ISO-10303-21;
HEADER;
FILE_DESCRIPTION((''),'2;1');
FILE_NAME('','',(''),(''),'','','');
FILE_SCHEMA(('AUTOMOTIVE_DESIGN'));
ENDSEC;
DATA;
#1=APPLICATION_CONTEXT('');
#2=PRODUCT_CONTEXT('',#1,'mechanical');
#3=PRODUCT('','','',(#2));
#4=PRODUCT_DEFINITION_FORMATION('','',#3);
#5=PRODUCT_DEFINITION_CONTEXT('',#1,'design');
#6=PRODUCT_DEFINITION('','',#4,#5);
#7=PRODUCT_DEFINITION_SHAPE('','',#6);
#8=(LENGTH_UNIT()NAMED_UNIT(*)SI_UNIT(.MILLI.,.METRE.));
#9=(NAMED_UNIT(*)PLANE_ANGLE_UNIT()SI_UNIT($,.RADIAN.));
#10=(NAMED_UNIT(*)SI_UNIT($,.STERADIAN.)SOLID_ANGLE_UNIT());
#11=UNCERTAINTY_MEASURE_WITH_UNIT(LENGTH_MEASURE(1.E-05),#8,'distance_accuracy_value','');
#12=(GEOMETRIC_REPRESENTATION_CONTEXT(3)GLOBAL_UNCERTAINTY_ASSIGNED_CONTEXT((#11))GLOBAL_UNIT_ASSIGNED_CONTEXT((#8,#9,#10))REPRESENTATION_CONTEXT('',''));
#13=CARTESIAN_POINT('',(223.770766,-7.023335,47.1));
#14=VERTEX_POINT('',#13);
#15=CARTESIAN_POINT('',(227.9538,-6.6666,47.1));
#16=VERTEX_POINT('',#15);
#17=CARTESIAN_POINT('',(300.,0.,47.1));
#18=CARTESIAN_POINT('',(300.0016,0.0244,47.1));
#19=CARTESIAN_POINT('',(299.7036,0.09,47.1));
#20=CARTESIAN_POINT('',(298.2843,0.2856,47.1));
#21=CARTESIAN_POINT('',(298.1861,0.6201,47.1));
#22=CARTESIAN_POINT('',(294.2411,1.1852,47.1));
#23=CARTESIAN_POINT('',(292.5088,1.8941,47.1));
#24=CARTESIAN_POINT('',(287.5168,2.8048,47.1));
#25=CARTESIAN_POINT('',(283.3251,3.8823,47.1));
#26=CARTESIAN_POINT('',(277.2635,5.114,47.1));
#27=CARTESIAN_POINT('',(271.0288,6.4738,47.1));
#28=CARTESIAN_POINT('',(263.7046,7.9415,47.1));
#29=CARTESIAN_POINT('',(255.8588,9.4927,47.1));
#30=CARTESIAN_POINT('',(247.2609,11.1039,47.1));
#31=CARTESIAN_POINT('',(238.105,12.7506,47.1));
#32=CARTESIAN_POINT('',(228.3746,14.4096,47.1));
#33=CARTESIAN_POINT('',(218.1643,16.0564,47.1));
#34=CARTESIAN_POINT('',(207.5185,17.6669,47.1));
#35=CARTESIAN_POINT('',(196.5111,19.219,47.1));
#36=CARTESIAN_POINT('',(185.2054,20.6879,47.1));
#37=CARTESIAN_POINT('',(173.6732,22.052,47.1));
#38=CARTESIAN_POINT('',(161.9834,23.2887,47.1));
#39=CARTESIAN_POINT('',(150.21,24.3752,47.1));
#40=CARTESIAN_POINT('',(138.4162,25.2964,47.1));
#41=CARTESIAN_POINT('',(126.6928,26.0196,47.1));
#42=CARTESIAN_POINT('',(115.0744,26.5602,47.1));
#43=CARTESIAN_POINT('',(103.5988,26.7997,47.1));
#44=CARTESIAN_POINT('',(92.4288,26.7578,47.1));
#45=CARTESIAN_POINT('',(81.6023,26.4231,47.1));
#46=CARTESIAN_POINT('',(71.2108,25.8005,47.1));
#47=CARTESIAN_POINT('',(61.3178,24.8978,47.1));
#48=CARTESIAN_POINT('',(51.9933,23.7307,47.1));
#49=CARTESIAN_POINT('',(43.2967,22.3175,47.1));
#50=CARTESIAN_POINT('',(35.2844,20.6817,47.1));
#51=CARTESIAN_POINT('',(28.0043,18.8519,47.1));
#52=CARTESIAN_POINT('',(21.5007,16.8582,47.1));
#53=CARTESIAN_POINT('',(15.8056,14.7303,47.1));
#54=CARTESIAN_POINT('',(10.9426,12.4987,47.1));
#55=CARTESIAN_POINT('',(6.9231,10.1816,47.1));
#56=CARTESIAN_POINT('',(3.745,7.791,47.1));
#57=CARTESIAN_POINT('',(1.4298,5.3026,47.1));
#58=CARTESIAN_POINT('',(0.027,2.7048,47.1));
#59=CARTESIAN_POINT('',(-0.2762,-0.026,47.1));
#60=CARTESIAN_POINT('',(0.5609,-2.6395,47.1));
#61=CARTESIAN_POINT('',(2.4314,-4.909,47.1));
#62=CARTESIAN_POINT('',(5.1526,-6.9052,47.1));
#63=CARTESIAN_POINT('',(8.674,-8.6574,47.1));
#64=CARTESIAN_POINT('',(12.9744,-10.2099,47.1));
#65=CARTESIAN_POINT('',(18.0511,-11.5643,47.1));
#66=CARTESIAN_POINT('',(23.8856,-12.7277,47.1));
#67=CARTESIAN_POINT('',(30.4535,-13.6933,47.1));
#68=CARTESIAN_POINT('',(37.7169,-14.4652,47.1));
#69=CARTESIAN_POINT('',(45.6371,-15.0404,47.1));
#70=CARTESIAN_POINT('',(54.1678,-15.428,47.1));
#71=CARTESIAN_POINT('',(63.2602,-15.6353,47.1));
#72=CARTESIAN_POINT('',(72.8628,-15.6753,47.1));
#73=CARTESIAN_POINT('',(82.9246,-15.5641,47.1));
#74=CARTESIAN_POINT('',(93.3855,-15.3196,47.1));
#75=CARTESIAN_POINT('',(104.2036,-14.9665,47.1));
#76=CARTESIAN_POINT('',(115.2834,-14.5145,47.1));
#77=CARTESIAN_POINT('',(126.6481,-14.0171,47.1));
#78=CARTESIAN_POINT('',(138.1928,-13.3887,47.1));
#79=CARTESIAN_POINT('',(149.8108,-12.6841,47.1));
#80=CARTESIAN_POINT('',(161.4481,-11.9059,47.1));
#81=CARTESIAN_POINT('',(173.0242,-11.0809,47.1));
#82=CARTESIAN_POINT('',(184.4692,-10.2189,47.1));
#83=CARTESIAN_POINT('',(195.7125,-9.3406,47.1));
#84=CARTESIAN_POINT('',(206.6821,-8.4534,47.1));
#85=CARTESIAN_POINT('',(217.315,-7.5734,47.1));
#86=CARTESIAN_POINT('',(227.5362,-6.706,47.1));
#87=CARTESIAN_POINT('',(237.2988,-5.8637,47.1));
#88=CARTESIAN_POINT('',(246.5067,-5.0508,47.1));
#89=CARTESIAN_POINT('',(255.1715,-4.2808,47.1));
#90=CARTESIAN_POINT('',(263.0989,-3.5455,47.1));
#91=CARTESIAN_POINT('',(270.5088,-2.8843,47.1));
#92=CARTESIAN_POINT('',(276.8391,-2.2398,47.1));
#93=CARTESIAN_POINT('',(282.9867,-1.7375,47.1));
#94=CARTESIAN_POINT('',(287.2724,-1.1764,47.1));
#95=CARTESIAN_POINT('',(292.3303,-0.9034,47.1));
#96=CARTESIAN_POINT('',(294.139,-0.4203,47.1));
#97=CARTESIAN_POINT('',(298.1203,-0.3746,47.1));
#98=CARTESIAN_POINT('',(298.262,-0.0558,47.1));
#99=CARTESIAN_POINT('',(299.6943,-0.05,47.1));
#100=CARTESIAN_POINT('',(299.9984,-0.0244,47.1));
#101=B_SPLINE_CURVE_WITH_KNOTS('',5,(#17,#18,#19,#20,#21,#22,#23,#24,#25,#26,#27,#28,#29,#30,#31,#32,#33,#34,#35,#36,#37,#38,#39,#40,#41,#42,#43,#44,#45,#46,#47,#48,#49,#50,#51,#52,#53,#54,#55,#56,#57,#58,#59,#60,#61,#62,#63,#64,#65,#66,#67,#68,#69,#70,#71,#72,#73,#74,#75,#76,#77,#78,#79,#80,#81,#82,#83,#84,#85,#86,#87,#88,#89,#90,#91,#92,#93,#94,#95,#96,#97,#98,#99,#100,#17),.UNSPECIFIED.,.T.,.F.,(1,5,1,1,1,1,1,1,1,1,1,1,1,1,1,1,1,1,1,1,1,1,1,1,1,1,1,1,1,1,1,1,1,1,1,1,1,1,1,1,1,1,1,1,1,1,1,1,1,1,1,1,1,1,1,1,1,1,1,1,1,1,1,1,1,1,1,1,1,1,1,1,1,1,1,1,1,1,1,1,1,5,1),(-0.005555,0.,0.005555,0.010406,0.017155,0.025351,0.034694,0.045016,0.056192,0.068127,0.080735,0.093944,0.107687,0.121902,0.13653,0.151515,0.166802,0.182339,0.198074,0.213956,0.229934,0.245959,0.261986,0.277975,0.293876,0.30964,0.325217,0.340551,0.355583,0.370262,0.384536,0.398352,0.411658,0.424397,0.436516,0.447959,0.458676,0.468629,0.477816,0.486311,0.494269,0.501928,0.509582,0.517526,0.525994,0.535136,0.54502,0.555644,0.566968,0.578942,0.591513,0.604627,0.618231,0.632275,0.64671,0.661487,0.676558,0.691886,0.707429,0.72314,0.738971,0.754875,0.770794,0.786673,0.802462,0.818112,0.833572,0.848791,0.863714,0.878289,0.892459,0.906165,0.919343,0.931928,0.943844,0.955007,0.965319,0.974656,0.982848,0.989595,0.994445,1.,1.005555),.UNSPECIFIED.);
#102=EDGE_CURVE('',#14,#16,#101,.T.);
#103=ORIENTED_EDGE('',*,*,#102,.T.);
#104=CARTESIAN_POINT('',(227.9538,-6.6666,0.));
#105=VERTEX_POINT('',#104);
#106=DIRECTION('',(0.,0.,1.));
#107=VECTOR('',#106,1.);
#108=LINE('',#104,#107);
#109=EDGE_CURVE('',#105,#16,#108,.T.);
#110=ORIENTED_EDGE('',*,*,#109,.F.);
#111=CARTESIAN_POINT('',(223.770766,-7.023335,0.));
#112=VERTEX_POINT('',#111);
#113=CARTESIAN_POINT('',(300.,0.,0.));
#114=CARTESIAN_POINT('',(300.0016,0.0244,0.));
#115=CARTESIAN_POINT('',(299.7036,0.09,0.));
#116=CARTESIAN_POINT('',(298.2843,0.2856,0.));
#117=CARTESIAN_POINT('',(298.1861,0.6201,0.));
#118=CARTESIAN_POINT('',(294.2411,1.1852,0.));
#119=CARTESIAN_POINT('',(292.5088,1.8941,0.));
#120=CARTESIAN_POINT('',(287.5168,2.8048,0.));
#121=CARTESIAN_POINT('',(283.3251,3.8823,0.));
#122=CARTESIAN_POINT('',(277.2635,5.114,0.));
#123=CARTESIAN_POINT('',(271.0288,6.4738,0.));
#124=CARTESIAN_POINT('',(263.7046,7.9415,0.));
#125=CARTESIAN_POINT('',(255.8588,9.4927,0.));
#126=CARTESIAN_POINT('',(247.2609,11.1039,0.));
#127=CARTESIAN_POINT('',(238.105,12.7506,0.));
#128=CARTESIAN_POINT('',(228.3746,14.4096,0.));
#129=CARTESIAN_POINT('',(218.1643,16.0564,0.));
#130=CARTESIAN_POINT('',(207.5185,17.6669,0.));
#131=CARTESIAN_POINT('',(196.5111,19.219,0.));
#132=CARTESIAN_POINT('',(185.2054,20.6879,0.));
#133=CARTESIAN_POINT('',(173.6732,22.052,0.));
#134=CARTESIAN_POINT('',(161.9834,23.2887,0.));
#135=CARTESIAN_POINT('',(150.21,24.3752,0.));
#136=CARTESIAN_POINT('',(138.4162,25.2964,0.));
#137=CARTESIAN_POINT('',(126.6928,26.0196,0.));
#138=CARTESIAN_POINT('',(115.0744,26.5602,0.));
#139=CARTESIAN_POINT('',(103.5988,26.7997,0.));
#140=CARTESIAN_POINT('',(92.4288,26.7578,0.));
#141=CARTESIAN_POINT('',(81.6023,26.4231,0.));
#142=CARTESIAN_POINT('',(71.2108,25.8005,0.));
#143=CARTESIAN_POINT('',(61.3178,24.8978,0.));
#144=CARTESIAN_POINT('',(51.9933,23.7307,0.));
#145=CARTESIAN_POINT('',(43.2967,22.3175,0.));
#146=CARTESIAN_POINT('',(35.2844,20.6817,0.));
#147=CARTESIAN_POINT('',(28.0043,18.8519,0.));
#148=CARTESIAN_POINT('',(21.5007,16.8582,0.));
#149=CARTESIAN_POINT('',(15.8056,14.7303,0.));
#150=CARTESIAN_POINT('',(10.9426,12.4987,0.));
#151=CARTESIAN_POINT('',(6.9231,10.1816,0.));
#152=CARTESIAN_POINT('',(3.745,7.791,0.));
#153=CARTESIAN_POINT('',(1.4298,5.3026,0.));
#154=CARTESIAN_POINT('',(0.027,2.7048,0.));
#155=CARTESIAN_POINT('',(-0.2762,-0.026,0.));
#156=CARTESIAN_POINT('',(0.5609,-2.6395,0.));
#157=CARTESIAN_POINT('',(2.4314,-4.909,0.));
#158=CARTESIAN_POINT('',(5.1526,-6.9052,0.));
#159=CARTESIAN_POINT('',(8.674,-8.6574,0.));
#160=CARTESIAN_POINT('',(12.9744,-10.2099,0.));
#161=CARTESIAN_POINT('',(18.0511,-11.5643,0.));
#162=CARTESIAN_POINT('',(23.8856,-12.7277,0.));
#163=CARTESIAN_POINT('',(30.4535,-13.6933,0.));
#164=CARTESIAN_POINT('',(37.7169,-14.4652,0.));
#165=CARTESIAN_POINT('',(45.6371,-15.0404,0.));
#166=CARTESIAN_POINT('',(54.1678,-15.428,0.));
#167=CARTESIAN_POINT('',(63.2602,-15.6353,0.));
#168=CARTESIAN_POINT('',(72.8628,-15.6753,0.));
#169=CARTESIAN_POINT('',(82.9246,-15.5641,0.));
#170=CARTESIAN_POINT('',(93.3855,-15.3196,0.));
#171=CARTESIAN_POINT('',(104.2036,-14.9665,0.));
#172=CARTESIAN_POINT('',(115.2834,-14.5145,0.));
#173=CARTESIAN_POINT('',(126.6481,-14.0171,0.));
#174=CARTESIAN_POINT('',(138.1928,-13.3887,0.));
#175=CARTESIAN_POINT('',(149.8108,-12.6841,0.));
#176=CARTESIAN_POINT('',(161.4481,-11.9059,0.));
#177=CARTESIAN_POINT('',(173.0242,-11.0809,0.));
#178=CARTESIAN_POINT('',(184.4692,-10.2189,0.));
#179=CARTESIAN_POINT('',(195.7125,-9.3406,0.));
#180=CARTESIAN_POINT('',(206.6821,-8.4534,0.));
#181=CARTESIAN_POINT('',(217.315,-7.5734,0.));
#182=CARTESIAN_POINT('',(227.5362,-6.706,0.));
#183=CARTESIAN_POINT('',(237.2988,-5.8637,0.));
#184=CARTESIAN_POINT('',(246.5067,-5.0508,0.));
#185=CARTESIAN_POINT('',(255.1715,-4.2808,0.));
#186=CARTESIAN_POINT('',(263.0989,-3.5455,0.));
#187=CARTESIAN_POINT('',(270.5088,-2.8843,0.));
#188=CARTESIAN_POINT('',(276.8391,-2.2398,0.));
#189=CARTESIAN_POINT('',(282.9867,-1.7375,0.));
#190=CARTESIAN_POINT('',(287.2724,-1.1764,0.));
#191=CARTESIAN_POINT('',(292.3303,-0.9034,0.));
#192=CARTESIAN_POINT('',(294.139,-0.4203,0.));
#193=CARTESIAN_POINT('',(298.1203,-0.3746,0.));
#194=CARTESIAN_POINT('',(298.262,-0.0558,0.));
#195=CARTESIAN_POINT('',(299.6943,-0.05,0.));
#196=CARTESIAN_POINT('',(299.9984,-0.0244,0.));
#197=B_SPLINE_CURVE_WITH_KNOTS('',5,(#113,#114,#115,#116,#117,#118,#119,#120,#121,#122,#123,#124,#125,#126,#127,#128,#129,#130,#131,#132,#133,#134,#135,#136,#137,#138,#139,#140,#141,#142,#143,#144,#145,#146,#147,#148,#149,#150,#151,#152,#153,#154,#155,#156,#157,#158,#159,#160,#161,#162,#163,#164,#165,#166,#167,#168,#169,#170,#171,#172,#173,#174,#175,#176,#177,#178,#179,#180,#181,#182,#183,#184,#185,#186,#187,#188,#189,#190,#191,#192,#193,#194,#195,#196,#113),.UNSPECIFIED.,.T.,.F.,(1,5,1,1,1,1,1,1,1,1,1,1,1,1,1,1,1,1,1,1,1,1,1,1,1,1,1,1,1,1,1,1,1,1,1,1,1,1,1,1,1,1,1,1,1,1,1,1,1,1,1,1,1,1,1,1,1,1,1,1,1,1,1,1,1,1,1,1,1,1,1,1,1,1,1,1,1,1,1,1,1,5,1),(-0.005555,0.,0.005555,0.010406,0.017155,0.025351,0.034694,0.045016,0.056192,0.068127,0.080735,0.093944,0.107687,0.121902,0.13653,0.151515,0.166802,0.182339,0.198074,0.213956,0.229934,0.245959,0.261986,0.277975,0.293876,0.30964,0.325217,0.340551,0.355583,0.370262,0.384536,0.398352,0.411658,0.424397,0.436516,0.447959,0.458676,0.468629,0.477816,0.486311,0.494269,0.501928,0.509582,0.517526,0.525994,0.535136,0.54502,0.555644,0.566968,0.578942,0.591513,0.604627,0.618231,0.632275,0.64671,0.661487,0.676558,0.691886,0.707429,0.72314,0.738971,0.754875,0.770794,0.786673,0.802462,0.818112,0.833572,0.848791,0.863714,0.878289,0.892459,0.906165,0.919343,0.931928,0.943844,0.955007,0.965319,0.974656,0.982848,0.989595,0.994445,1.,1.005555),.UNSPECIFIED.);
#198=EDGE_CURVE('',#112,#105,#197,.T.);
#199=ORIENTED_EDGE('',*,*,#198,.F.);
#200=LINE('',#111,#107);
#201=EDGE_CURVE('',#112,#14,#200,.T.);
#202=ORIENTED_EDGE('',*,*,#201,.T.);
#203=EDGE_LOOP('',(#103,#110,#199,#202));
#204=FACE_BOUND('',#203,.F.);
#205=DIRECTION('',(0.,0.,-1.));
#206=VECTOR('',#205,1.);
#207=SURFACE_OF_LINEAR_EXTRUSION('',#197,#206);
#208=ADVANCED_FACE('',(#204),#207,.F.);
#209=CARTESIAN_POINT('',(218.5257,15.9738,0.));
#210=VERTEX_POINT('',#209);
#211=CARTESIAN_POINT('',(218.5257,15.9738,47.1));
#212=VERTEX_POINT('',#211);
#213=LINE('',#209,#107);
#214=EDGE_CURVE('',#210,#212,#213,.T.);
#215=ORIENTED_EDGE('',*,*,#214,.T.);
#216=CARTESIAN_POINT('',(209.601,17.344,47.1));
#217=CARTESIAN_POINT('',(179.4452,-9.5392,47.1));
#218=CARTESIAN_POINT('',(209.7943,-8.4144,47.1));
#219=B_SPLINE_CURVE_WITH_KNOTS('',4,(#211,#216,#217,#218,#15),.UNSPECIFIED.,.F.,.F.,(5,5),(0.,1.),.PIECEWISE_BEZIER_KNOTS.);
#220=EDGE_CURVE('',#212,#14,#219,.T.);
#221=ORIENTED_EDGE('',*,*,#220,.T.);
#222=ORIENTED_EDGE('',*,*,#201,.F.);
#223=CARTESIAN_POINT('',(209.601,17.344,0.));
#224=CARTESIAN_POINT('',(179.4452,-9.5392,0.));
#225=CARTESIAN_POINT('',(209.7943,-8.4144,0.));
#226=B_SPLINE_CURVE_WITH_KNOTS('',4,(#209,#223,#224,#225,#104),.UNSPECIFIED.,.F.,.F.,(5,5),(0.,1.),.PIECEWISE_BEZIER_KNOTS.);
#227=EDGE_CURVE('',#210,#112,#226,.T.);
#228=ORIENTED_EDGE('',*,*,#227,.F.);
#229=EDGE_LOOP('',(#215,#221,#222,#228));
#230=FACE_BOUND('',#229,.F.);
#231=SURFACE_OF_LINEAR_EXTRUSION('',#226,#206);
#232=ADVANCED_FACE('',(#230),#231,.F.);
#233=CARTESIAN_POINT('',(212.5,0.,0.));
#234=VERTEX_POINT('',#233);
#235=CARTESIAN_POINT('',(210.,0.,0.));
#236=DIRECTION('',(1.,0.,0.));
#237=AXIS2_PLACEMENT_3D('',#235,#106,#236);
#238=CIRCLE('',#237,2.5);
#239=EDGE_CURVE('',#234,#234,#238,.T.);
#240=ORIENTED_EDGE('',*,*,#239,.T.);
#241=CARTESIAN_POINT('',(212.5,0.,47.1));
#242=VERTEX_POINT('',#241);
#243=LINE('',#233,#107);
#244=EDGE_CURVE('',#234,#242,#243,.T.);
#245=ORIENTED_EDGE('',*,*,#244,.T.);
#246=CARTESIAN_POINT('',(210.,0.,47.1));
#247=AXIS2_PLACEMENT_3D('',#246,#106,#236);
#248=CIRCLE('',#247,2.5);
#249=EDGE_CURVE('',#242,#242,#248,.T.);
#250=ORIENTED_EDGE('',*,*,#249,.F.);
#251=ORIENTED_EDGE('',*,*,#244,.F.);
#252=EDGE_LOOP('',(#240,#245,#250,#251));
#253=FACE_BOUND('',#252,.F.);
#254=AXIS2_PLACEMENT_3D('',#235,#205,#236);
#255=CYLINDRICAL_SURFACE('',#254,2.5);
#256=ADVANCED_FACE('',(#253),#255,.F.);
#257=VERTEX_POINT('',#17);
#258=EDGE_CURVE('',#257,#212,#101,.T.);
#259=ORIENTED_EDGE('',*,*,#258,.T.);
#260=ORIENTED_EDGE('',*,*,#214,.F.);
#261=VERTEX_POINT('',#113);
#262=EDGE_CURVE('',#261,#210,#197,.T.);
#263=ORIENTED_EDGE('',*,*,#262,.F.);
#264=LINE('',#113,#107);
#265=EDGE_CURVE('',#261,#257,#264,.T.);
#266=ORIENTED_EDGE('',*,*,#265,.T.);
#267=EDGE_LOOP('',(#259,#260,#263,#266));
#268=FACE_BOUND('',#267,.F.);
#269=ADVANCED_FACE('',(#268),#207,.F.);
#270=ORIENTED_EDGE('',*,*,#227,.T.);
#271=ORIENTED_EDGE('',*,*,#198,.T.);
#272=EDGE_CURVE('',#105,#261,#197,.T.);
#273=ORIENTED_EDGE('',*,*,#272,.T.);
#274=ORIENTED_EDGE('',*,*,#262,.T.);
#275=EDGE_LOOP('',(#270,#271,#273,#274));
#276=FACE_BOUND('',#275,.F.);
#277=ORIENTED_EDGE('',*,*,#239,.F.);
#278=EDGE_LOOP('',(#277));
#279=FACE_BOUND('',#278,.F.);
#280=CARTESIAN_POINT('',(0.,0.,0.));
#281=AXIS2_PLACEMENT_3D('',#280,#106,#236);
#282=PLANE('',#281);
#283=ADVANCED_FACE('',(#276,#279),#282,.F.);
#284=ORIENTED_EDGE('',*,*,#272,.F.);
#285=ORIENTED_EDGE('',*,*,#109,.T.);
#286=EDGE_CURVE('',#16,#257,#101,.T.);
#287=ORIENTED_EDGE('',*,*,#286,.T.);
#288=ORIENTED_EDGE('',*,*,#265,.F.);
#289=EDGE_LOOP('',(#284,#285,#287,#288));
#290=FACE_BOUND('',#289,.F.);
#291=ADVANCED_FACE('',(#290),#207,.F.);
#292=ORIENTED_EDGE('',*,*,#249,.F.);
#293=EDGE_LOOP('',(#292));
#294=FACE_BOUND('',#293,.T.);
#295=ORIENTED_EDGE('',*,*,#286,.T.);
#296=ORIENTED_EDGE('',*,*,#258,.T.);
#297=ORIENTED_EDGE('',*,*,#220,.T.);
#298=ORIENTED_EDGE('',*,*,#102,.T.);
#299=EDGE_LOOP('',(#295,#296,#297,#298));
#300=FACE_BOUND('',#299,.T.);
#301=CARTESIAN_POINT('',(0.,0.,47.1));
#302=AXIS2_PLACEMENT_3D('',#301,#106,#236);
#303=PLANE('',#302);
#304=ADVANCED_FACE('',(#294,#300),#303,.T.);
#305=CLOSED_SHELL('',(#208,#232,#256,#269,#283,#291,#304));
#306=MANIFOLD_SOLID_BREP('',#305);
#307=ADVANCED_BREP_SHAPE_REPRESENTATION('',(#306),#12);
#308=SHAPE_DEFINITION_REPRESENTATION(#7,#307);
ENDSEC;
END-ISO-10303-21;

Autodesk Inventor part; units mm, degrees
ref_plane "YZ Plane" through (0, 0, 0) normal (1, 0, 0) x (0, 1, 0)
ref_plane "XZ Plane" through (0, 0, 0) normal (0, 1, 0) x (-1, 0, 0)
ref_plane "XY Plane" through (0, 0, 0) normal (0, 0, 1) x (1, 0, 0)
sketch "Sketch1" plane through (0, 0, 0) normal (0, 0, 1) x (1, 0, 0)
  spline S0 degree 5 poles (300, 0) (300.0016, 0.0244) (299.7036, 0.09) (298.2843, 0.2856) (298.1861, 0.6201) (294.2411, 1.1852) (292.5088, 1.8941) (287.5168, 2.8048) (283.3251, 3.8823) (277.2635, 5.114) (271.0288, 6.4738) (263.7046, 7.9415) (255.8588, 9.4927) (247.2609, 11.1039) (238.105, 12.7506) (228.3746, 14.4096) (218.1643, 16.0564) (207.5185, 17.6669) (196.5111, 19.219) (185.2054, 20.6879) (173.6732, 22.052) (161.9834, 23.2887) (150.21, 24.3752) (138.4162, 25.2964) (126.6928, 26.0196) (115.0744, 26.5602) (103.5988, 26.7997) (92.4288, 26.7578) (81.6023, 26.4231) (71.2108, 25.8005) (61.3178, 24.8978) (51.9933, 23.7307) (43.2967, 22.3175) (35.2844, 20.6817) (28.0043, 18.8519) (21.5007, 16.8582) (15.8056, 14.7303) (10.9426, 12.4987) (6.9231, 10.1816) (3.745, 7.791) (1.4298, 5.3026) (0.027, 2.7048) (-0.2762, -0.026) (0.5609, -2.6395) (2.4314, -4.909) (5.1526, -6.9052) (8.674, -8.6574) (12.9744, -10.2099) (18.0511, -11.5643) (23.8856, -12.7277) (30.4535, -13.6933) (37.7169, -14.4652) (45.6371, -15.0404) (54.1678, -15.428) (63.2602, -15.6353) (72.8628, -15.6753) (82.9246, -15.5641) (93.3855, -15.3196) (104.2036, -14.9665) (115.2834, -14.5145) (126.6481, -14.0171) (138.1928, -13.3887) (149.8108, -12.6841) (161.4481, -11.9059) (173.0242, -11.0809) (184.4692, -10.2189) (195.7125, -9.3406) (206.6821, -8.4534) (217.315, -7.5734) (227.5362, -6.706) (237.2988, -5.8637) (246.5067, -5.0508) (255.1715, -4.2808) (263.0989, -3.5455) (270.5088, -2.8843) (276.8391, -2.2398) (282.9867, -1.7375) (287.2724, -1.1764) (292.3303, -0.9034) (294.139, -0.4203) (298.1203, -0.3746) (298.262, -0.0558) (299.6943, -0.05) (299.9984, -0.0244) (300, 0) knots 0 0 0 0 0 0 0.005555 0.010406 0.017155 0.025351 0.034694 0.045016 0.056192 0.068127 0.080735 0.093944 0.107687 0.121902 0.13653 0.151515 0.166802 0.182339 0.198074 0.213956 0.229934 0.245959 0.261986 0.277975 0.293876 0.30964 0.325217 0.340551 0.355583 0.370262 0.384536 0.398352 0.411658 0.424397 0.436516 0.447959 0.458676 0.468629 0.477816 0.486311 0.494269 0.501928 0.509582 0.517526 0.525994 0.535136 0.54502 0.555644 0.566968 0.578942 0.591513 0.604627 0.618231 0.632275 0.64671 0.661487 0.676558 0.691886 0.707429 0.72314 0.738971 0.754875 0.770794 0.786673 0.802462 0.818112 0.833572 0.848791 0.863714 0.878289 0.892459 0.906165 0.919343 0.931928 0.943844 0.955007 0.965319 0.974656 0.982848 0.989595 0.994445 1 1 1 1 1 1
  line L0 (200, 103) -> (200, -97) construction
  line L1 (0, -164.4758) -> (0, 307.8549) construction
  line L2 (210, 0) -> (210, -12) construction
  line L3 (210, 0) -> (222, 0) construction
  spline S1 degree 4 poles (218.5257, 15.9738) (209.601, 17.344) (179.4452, -9.5392) (209.7943, -8.4144) (227.9538, -6.6666) knots 0 0 0 0 0 1 1 1 1 1
  line L4 (221.1774, 15.5667) -> (215.874, 16.3809) construction
  arc A0 (220.2542, 15.1852) -> (216.6402, 15.74) centre (217.9961, 12.5243) ccw construction
  line L5 (222.2571, -7.2149) -> (233.6505, -6.1183) construction
  arc A1 (223.3931, -7.0631) -> (232.5064, -6.186) centre (204.1762, 240.3791) ccw construction
  circle A2 centre (210, 0) radius 2.5
  point P0 (0, 0)
  point P1 (298.1739, 0.4338)
  point P2 (295.9008, 0.9681)
  point P3 (292.7367, 1.7025)
  point P4 (288.6996, 2.6229)
  point P5 (283.8129, 3.7134)
  point P6 (278.1048, 4.9545)
  point P7 (271.6086, 6.3255)
  point P8 (264.3621, 7.8039)
  point P9 (256.4085, 9.3663)
  point P10 (247.7946, 10.9887)
  point P11 (238.572, 12.6468)
  point P12 (228.7959, 14.3166)
  point P13 (207.8235, 17.5944)
  point P14 (196.755, 19.155)
  point P15 (185.388, 20.6319)
  point P16 (173.7924, 22.0023)
  point P17 (162.0405, 23.2434)
  point P18 (150.2055, 24.3336)
  point P19 (138.3615, 25.2522)
  point P20 (126.5832, 25.98)
  point P21 (114.8976, 26.493)
  point P22 (103.3635, 26.7315)
  point P23 (92.1183, 26.6775)
  point P24 (81.2367, 26.3292)
  point P25 (70.7922, 25.689)
  point P26 (60.8541, 24.7656)
  point P27 (51.489, 23.5734)
  point P28 (42.7587, 22.131)
  point P29 (34.7199, 20.4618)
  point P30 (27.4239, 18.5934)
  point P31 (20.9172, 16.5555)
  point P32 (15.2385, 14.379)
  point P33 (10.422, 12.0954)
  point P34 (6.4944, 9.7347)
  point P35 (3.4767, 7.3239)
  point P36 (1.3836, 4.8867)
  point P37 (0.2238, 2.4411)
  point P38 (0, 0)
  point P39 (0.7011, -2.3487)
  point P40 (2.31, -4.5201)
  point P41 (4.8123, -6.5094)
  point P42 (8.1885, -8.3112)
  point P43 (12.414, -9.9204)
  point P44 (17.4594, -11.3319)
  point P45 (23.2908, -12.5418)
  point P46 (29.871, -13.5477)
  point P47 (37.1583, -14.3505)
  point P48 (45.1092, -14.9526)
  point P49 (53.6766, -15.3609)
  point P50 (62.8101, -15.5853)
  point P51 (72.4581, -15.639)
  point P52 (82.566, -15.5385)
  point P53 (93.0768, -15.3033)
  point P54 (103.9314, -14.9544)
  point P55 (115.0689, -14.514)
  point P56 (126.4866, -13.9956)
  point P57 (138.1008, -13.3755)
  point P58 (149.7945, -12.6672)
  point P59 (161.4972, -11.8896)
  point P60 (173.1378, -11.061)
  point P61 (184.6455, -10.1973)
  point P62 (195.9501, -9.3141)
  point P63 (206.9814, -8.4237)
  point P64 (217.6716, -7.5381)
  point P65 (227.9538, -6.6666)
  point P66 (237.7638, -5.8185)
  point P67 (247.0398, -5.0019)
  point P68 (255.7236, -4.2234)
  point P69 (263.7597, -3.4905)
  point P70 (271.0965, -2.8098)
  point P71 (277.6872, -2.1882)
  point P72 (283.4889, -1.6323)
  point P73 (288.4641, -1.1487)
  point P74 (292.5804, -0.7434)
  point P75 (295.8102, -0.4221)
  point P76 (298.1328, -0.1887)
  point P77 (299.5323, -0.0474)
  point P78 (200, 0)
  point P79 (223.7705, -7.0234)
  dimension "d0" = 200
  dimension "d2" = 200
  dimension "d3" = 12
  dimension "d4" = 90
  dimension "d5" = 10
  dimension "d17" = 5
extrude "Extrusion2" add sketch "Sketch1" along normal blind 47.1 contours S0 S1 picked at (264.3061, 0.3433)
properties part number "4P.01.01.01-TW-v1-Flap Shape Definition" material "Polyurethane Foam"
